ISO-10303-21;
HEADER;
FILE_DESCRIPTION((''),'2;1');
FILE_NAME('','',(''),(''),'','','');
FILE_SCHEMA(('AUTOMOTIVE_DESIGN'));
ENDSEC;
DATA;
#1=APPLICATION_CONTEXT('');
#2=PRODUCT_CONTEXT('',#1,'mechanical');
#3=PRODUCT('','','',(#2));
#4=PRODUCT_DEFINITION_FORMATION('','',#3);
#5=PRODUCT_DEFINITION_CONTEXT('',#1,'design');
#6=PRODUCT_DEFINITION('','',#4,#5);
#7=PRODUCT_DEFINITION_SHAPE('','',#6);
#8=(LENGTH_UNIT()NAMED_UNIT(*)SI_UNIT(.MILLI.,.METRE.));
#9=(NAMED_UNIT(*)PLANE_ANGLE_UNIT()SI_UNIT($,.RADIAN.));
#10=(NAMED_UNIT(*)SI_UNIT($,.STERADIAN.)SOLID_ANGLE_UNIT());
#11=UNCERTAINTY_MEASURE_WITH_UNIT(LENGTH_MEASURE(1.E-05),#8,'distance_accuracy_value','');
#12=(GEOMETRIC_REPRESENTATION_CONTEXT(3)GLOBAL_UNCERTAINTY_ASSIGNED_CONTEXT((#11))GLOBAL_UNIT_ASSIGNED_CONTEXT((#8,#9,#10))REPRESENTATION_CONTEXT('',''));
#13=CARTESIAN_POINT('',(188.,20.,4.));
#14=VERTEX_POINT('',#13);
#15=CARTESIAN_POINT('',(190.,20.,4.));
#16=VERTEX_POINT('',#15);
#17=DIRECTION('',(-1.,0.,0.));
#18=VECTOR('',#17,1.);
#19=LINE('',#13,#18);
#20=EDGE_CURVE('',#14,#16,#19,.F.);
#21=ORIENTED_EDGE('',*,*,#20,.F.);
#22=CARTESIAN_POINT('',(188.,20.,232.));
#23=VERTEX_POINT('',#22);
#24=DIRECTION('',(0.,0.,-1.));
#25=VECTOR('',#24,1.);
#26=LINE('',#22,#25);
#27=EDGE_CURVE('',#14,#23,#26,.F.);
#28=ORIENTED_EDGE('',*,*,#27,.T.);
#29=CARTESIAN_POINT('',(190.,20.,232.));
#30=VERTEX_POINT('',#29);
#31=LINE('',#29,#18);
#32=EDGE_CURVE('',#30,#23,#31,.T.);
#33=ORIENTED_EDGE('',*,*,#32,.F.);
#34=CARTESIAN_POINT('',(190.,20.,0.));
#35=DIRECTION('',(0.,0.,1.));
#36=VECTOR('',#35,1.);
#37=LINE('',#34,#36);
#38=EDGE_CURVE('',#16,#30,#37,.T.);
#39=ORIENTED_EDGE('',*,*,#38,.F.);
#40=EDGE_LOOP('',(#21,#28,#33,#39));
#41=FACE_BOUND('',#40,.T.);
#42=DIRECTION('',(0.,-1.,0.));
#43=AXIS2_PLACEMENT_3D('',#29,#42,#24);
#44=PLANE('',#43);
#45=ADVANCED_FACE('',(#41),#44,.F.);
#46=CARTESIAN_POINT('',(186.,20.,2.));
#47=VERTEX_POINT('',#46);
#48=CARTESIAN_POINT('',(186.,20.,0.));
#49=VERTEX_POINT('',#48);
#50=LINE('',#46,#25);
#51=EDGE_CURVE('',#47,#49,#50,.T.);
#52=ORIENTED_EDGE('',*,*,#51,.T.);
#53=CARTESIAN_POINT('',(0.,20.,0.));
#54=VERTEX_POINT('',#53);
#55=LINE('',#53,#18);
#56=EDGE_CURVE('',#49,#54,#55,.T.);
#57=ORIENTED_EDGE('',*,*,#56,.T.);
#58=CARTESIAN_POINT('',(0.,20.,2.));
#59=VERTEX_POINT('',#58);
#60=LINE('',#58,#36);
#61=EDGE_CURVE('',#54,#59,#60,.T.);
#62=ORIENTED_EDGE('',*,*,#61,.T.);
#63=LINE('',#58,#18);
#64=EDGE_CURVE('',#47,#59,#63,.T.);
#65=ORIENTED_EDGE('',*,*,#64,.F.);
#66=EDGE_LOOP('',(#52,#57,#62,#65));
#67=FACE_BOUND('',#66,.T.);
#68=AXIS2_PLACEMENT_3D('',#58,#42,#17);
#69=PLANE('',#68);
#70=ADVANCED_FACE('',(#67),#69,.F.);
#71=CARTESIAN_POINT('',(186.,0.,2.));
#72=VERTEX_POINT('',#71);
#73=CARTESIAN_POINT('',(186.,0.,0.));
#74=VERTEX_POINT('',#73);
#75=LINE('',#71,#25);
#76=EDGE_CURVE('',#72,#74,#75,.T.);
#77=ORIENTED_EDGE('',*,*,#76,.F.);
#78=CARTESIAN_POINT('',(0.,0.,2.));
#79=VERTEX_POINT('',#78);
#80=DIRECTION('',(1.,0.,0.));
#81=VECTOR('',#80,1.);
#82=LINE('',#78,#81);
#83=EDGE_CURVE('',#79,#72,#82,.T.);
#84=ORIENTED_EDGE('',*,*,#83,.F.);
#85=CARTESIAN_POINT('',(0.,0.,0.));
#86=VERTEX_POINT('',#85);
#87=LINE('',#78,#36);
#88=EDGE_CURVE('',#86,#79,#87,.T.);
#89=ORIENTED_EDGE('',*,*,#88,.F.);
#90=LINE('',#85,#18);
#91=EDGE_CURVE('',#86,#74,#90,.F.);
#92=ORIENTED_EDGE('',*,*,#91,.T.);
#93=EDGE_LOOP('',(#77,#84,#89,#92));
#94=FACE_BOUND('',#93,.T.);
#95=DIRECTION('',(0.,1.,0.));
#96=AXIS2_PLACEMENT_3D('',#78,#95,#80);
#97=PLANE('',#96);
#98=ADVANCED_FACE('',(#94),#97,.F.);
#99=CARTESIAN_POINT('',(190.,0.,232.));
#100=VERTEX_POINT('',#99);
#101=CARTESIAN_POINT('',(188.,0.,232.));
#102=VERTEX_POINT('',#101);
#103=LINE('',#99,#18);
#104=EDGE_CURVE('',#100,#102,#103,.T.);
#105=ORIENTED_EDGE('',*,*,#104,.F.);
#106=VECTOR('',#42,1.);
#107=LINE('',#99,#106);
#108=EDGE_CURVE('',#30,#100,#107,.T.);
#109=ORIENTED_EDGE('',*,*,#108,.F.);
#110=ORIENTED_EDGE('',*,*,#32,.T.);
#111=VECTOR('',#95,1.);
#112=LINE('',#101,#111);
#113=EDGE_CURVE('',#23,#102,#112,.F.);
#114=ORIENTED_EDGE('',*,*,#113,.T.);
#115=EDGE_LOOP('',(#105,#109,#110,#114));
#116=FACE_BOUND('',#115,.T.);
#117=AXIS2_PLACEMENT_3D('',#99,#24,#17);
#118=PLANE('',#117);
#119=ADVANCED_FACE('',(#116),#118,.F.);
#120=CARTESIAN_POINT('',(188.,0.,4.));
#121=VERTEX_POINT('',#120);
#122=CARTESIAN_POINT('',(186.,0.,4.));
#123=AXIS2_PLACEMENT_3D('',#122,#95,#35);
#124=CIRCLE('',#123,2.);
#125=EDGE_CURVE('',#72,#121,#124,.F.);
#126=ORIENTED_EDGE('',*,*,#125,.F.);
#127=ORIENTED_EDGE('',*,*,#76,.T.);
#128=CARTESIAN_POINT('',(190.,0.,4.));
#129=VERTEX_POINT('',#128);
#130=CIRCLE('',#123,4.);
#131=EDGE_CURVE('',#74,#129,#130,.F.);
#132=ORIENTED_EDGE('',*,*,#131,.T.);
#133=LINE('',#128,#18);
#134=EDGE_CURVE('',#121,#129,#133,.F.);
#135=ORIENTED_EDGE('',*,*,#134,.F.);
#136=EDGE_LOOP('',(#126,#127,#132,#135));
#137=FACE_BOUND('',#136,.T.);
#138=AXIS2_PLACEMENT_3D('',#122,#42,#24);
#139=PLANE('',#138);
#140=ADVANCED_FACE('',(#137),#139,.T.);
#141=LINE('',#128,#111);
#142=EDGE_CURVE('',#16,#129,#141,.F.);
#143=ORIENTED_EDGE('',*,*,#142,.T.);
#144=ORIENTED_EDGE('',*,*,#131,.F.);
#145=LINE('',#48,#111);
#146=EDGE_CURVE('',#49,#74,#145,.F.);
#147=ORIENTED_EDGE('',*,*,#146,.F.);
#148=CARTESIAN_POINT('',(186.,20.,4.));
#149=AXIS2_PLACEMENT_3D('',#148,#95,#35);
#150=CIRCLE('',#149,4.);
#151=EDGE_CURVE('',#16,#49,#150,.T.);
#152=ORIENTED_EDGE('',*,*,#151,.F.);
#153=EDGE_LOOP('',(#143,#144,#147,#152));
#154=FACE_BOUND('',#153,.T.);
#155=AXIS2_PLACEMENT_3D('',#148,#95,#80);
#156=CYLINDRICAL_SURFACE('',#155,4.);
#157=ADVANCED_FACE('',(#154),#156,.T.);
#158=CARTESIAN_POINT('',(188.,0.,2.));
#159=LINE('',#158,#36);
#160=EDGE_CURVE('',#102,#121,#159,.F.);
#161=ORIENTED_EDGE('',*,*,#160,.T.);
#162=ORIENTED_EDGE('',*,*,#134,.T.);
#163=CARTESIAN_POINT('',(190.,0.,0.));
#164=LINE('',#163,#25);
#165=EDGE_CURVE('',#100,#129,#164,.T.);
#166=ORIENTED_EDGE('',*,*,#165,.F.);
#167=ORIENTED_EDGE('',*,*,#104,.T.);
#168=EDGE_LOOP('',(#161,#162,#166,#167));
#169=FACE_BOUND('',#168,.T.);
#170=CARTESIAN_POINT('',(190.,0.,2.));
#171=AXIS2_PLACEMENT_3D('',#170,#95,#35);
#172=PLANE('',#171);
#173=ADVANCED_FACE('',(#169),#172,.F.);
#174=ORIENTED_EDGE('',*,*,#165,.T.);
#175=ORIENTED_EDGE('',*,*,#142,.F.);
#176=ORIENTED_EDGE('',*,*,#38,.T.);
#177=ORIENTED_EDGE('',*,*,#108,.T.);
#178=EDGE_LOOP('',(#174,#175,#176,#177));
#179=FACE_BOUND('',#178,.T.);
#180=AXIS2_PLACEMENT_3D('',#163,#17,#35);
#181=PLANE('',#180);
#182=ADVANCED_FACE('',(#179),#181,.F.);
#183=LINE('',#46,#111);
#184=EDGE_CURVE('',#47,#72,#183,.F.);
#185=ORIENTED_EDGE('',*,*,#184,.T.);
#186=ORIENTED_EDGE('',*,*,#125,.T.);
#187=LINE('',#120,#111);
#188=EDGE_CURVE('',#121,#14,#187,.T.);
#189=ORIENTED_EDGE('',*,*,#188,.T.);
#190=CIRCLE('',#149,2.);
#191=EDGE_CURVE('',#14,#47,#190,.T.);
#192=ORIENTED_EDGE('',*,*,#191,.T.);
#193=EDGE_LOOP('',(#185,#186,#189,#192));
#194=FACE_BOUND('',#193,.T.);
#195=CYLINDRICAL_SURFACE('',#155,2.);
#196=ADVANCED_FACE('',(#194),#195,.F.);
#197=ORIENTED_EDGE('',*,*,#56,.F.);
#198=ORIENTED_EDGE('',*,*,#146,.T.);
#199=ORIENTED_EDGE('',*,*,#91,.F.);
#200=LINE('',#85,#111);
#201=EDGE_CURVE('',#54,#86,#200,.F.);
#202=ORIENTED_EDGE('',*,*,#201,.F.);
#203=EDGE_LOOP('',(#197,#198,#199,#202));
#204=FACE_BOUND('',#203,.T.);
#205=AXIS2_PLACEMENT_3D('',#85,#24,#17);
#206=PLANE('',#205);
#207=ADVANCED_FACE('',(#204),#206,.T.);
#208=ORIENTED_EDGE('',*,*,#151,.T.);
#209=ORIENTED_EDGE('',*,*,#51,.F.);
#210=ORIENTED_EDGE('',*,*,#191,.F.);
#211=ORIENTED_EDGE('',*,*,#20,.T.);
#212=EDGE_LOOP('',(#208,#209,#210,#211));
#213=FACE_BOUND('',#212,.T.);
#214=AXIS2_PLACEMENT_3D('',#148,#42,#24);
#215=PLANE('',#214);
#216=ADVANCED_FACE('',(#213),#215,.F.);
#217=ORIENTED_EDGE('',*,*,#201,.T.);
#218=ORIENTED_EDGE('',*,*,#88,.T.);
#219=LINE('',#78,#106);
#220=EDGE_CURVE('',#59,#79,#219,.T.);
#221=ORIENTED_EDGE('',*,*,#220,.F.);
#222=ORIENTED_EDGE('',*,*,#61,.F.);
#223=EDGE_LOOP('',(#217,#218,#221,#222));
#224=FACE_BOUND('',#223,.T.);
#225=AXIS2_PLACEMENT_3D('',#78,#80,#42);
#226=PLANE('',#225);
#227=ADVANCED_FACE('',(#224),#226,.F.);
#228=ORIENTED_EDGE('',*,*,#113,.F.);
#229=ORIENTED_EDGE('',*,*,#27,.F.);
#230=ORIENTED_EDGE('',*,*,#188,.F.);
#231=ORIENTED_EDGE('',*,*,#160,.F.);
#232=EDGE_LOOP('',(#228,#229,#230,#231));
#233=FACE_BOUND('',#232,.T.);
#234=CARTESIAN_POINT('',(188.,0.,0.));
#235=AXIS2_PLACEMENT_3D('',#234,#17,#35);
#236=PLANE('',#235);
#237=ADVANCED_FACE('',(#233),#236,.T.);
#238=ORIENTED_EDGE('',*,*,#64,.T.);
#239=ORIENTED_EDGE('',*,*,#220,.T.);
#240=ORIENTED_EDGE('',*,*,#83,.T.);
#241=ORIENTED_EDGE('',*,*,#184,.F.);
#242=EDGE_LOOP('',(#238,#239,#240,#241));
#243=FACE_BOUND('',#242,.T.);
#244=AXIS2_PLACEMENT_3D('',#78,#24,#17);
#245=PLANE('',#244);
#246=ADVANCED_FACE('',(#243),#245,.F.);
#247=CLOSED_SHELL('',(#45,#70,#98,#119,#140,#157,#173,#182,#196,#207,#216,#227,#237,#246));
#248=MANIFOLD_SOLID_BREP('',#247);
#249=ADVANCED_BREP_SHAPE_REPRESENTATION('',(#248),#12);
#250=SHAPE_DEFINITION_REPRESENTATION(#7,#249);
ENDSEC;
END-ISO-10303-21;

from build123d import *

# Parameters (mm, degrees)
SKETCH_1_W                       = 190
SKETCH_1_H                       = 20
EXTRUDE_2_DEPTH                  = 2
SM_EDGE_FLANGE_2_STRIP_W         = 12
SM_EDGE_FLANGE_2_STRIP_H         = 2
SM_EDGE_FLANGE_2_STRIP_CUT_DEPTH = 20
SM_EDGE_FLANGE_2_DEPTH           = 20


# Sheet-metal steps are written as plain solids
with BuildPart() as part:
    # Эскиз1 → Бобышка-Вытянуть2 (new body)
    with BuildSketch(Plane.XY):
        with Locations((95, 10)):
            Rectangle(SKETCH_1_W, SKETCH_1_H)
    extrude(amount=EXTRUDE_2_DEPTH)

    # Ребро-кромка2 strip (across the edge) → Ребро-кромка2 strip cut (cut)
    with BuildSketch(Plane(origin=(190, 0, 2), x_dir=(-1, 0, 0), z_dir=(0, 1, 0))):
        with Locations((-2, -1)):
            Rectangle(SM_EDGE_FLANGE_2_STRIP_W, SM_EDGE_FLANGE_2_STRIP_H)
    extrude(amount=SM_EDGE_FLANGE_2_STRIP_CUT_DEPTH, mode=Mode.SUBTRACT)

    # Ребро-кромка2 section (across the edge) → Ребро-кромка2 (add)
    with BuildSketch(Plane(origin=(190, 0, 2), x_dir=(-1, 0, 0), z_dir=(0, 1, 0))):
        with BuildLine():
            Line((0, 2), (0, 230))
            Line((0, 230), (2, 230))
            Line((2, 230), (2, 2))
            ThreePointArc((2, 2), (2.585786438, 0.585786438), (4, 0))
            Line((4, 0), (4, -2))
            ThreePointArc((4, -2), (1.171572875, -0.828427125), (0, 2))
        make_face()
    extrude(amount=SM_EDGE_FLANGE_2_DEPTH)


solid = part.part
